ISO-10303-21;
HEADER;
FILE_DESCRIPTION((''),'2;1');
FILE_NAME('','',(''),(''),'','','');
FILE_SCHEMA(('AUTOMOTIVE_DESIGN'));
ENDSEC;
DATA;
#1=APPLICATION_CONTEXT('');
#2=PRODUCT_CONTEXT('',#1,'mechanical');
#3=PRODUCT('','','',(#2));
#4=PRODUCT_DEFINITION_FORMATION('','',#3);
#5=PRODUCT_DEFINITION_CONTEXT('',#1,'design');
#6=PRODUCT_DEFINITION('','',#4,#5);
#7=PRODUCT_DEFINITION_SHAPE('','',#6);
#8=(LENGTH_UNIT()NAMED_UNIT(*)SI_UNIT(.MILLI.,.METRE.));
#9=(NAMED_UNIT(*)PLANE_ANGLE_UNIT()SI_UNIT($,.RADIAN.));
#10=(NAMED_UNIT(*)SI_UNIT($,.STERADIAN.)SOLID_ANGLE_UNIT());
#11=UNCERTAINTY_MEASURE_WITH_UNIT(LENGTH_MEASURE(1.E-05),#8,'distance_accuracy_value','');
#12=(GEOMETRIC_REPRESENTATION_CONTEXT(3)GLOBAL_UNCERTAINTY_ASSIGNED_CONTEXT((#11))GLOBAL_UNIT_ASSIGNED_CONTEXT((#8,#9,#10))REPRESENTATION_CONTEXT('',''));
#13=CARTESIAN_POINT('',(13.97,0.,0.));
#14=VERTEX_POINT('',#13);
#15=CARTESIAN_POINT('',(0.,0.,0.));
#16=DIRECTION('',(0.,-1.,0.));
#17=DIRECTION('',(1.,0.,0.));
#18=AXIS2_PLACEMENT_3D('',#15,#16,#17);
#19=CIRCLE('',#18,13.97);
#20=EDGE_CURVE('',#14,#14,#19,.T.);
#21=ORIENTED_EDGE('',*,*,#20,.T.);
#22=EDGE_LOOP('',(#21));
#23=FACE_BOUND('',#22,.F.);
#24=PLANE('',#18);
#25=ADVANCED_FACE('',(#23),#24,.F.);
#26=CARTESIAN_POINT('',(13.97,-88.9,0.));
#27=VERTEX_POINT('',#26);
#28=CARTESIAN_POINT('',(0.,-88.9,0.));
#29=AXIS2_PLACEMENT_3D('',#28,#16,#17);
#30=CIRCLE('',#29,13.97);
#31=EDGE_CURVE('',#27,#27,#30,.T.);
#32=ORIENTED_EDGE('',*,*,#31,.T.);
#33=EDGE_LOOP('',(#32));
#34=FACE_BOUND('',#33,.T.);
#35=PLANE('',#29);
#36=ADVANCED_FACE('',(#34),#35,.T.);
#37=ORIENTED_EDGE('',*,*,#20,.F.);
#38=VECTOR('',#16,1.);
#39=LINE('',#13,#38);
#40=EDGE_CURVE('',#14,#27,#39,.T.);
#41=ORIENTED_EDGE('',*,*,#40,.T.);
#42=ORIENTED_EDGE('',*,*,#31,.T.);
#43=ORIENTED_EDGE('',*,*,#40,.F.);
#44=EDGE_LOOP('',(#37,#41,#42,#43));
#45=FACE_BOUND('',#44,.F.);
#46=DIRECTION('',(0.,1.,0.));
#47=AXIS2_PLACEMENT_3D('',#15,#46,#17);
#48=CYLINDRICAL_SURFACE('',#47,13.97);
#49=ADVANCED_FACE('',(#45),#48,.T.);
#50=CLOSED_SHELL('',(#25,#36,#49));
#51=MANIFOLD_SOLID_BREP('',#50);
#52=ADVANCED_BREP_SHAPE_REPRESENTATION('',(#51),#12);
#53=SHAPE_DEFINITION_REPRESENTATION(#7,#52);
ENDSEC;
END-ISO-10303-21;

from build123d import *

# Parameters (mm, degrees)
F0_R     = 13.97
F2_DEPTH = 88.9
F1_R     = 1.5875
F3_DEPTH = 142


# Not quite as in the source:
# - an extrude ends at something that could not be found from the text; its depth is read off the source's solid


with BuildPart() as f2:
    # F0 (on Front) → F2 (new body)
    with BuildSketch(Plane.XZ):
        Circle(F0_R)
    extrude(amount=F2_DEPTH)

    # F1 (on Front) → F3 (cut, through all)
    with BuildSketch(Plane.XZ):
        Circle(F1_R)
    extrude(amount=-F3_DEPTH, mode=Mode.SUBTRACT)


solid = f2.part
